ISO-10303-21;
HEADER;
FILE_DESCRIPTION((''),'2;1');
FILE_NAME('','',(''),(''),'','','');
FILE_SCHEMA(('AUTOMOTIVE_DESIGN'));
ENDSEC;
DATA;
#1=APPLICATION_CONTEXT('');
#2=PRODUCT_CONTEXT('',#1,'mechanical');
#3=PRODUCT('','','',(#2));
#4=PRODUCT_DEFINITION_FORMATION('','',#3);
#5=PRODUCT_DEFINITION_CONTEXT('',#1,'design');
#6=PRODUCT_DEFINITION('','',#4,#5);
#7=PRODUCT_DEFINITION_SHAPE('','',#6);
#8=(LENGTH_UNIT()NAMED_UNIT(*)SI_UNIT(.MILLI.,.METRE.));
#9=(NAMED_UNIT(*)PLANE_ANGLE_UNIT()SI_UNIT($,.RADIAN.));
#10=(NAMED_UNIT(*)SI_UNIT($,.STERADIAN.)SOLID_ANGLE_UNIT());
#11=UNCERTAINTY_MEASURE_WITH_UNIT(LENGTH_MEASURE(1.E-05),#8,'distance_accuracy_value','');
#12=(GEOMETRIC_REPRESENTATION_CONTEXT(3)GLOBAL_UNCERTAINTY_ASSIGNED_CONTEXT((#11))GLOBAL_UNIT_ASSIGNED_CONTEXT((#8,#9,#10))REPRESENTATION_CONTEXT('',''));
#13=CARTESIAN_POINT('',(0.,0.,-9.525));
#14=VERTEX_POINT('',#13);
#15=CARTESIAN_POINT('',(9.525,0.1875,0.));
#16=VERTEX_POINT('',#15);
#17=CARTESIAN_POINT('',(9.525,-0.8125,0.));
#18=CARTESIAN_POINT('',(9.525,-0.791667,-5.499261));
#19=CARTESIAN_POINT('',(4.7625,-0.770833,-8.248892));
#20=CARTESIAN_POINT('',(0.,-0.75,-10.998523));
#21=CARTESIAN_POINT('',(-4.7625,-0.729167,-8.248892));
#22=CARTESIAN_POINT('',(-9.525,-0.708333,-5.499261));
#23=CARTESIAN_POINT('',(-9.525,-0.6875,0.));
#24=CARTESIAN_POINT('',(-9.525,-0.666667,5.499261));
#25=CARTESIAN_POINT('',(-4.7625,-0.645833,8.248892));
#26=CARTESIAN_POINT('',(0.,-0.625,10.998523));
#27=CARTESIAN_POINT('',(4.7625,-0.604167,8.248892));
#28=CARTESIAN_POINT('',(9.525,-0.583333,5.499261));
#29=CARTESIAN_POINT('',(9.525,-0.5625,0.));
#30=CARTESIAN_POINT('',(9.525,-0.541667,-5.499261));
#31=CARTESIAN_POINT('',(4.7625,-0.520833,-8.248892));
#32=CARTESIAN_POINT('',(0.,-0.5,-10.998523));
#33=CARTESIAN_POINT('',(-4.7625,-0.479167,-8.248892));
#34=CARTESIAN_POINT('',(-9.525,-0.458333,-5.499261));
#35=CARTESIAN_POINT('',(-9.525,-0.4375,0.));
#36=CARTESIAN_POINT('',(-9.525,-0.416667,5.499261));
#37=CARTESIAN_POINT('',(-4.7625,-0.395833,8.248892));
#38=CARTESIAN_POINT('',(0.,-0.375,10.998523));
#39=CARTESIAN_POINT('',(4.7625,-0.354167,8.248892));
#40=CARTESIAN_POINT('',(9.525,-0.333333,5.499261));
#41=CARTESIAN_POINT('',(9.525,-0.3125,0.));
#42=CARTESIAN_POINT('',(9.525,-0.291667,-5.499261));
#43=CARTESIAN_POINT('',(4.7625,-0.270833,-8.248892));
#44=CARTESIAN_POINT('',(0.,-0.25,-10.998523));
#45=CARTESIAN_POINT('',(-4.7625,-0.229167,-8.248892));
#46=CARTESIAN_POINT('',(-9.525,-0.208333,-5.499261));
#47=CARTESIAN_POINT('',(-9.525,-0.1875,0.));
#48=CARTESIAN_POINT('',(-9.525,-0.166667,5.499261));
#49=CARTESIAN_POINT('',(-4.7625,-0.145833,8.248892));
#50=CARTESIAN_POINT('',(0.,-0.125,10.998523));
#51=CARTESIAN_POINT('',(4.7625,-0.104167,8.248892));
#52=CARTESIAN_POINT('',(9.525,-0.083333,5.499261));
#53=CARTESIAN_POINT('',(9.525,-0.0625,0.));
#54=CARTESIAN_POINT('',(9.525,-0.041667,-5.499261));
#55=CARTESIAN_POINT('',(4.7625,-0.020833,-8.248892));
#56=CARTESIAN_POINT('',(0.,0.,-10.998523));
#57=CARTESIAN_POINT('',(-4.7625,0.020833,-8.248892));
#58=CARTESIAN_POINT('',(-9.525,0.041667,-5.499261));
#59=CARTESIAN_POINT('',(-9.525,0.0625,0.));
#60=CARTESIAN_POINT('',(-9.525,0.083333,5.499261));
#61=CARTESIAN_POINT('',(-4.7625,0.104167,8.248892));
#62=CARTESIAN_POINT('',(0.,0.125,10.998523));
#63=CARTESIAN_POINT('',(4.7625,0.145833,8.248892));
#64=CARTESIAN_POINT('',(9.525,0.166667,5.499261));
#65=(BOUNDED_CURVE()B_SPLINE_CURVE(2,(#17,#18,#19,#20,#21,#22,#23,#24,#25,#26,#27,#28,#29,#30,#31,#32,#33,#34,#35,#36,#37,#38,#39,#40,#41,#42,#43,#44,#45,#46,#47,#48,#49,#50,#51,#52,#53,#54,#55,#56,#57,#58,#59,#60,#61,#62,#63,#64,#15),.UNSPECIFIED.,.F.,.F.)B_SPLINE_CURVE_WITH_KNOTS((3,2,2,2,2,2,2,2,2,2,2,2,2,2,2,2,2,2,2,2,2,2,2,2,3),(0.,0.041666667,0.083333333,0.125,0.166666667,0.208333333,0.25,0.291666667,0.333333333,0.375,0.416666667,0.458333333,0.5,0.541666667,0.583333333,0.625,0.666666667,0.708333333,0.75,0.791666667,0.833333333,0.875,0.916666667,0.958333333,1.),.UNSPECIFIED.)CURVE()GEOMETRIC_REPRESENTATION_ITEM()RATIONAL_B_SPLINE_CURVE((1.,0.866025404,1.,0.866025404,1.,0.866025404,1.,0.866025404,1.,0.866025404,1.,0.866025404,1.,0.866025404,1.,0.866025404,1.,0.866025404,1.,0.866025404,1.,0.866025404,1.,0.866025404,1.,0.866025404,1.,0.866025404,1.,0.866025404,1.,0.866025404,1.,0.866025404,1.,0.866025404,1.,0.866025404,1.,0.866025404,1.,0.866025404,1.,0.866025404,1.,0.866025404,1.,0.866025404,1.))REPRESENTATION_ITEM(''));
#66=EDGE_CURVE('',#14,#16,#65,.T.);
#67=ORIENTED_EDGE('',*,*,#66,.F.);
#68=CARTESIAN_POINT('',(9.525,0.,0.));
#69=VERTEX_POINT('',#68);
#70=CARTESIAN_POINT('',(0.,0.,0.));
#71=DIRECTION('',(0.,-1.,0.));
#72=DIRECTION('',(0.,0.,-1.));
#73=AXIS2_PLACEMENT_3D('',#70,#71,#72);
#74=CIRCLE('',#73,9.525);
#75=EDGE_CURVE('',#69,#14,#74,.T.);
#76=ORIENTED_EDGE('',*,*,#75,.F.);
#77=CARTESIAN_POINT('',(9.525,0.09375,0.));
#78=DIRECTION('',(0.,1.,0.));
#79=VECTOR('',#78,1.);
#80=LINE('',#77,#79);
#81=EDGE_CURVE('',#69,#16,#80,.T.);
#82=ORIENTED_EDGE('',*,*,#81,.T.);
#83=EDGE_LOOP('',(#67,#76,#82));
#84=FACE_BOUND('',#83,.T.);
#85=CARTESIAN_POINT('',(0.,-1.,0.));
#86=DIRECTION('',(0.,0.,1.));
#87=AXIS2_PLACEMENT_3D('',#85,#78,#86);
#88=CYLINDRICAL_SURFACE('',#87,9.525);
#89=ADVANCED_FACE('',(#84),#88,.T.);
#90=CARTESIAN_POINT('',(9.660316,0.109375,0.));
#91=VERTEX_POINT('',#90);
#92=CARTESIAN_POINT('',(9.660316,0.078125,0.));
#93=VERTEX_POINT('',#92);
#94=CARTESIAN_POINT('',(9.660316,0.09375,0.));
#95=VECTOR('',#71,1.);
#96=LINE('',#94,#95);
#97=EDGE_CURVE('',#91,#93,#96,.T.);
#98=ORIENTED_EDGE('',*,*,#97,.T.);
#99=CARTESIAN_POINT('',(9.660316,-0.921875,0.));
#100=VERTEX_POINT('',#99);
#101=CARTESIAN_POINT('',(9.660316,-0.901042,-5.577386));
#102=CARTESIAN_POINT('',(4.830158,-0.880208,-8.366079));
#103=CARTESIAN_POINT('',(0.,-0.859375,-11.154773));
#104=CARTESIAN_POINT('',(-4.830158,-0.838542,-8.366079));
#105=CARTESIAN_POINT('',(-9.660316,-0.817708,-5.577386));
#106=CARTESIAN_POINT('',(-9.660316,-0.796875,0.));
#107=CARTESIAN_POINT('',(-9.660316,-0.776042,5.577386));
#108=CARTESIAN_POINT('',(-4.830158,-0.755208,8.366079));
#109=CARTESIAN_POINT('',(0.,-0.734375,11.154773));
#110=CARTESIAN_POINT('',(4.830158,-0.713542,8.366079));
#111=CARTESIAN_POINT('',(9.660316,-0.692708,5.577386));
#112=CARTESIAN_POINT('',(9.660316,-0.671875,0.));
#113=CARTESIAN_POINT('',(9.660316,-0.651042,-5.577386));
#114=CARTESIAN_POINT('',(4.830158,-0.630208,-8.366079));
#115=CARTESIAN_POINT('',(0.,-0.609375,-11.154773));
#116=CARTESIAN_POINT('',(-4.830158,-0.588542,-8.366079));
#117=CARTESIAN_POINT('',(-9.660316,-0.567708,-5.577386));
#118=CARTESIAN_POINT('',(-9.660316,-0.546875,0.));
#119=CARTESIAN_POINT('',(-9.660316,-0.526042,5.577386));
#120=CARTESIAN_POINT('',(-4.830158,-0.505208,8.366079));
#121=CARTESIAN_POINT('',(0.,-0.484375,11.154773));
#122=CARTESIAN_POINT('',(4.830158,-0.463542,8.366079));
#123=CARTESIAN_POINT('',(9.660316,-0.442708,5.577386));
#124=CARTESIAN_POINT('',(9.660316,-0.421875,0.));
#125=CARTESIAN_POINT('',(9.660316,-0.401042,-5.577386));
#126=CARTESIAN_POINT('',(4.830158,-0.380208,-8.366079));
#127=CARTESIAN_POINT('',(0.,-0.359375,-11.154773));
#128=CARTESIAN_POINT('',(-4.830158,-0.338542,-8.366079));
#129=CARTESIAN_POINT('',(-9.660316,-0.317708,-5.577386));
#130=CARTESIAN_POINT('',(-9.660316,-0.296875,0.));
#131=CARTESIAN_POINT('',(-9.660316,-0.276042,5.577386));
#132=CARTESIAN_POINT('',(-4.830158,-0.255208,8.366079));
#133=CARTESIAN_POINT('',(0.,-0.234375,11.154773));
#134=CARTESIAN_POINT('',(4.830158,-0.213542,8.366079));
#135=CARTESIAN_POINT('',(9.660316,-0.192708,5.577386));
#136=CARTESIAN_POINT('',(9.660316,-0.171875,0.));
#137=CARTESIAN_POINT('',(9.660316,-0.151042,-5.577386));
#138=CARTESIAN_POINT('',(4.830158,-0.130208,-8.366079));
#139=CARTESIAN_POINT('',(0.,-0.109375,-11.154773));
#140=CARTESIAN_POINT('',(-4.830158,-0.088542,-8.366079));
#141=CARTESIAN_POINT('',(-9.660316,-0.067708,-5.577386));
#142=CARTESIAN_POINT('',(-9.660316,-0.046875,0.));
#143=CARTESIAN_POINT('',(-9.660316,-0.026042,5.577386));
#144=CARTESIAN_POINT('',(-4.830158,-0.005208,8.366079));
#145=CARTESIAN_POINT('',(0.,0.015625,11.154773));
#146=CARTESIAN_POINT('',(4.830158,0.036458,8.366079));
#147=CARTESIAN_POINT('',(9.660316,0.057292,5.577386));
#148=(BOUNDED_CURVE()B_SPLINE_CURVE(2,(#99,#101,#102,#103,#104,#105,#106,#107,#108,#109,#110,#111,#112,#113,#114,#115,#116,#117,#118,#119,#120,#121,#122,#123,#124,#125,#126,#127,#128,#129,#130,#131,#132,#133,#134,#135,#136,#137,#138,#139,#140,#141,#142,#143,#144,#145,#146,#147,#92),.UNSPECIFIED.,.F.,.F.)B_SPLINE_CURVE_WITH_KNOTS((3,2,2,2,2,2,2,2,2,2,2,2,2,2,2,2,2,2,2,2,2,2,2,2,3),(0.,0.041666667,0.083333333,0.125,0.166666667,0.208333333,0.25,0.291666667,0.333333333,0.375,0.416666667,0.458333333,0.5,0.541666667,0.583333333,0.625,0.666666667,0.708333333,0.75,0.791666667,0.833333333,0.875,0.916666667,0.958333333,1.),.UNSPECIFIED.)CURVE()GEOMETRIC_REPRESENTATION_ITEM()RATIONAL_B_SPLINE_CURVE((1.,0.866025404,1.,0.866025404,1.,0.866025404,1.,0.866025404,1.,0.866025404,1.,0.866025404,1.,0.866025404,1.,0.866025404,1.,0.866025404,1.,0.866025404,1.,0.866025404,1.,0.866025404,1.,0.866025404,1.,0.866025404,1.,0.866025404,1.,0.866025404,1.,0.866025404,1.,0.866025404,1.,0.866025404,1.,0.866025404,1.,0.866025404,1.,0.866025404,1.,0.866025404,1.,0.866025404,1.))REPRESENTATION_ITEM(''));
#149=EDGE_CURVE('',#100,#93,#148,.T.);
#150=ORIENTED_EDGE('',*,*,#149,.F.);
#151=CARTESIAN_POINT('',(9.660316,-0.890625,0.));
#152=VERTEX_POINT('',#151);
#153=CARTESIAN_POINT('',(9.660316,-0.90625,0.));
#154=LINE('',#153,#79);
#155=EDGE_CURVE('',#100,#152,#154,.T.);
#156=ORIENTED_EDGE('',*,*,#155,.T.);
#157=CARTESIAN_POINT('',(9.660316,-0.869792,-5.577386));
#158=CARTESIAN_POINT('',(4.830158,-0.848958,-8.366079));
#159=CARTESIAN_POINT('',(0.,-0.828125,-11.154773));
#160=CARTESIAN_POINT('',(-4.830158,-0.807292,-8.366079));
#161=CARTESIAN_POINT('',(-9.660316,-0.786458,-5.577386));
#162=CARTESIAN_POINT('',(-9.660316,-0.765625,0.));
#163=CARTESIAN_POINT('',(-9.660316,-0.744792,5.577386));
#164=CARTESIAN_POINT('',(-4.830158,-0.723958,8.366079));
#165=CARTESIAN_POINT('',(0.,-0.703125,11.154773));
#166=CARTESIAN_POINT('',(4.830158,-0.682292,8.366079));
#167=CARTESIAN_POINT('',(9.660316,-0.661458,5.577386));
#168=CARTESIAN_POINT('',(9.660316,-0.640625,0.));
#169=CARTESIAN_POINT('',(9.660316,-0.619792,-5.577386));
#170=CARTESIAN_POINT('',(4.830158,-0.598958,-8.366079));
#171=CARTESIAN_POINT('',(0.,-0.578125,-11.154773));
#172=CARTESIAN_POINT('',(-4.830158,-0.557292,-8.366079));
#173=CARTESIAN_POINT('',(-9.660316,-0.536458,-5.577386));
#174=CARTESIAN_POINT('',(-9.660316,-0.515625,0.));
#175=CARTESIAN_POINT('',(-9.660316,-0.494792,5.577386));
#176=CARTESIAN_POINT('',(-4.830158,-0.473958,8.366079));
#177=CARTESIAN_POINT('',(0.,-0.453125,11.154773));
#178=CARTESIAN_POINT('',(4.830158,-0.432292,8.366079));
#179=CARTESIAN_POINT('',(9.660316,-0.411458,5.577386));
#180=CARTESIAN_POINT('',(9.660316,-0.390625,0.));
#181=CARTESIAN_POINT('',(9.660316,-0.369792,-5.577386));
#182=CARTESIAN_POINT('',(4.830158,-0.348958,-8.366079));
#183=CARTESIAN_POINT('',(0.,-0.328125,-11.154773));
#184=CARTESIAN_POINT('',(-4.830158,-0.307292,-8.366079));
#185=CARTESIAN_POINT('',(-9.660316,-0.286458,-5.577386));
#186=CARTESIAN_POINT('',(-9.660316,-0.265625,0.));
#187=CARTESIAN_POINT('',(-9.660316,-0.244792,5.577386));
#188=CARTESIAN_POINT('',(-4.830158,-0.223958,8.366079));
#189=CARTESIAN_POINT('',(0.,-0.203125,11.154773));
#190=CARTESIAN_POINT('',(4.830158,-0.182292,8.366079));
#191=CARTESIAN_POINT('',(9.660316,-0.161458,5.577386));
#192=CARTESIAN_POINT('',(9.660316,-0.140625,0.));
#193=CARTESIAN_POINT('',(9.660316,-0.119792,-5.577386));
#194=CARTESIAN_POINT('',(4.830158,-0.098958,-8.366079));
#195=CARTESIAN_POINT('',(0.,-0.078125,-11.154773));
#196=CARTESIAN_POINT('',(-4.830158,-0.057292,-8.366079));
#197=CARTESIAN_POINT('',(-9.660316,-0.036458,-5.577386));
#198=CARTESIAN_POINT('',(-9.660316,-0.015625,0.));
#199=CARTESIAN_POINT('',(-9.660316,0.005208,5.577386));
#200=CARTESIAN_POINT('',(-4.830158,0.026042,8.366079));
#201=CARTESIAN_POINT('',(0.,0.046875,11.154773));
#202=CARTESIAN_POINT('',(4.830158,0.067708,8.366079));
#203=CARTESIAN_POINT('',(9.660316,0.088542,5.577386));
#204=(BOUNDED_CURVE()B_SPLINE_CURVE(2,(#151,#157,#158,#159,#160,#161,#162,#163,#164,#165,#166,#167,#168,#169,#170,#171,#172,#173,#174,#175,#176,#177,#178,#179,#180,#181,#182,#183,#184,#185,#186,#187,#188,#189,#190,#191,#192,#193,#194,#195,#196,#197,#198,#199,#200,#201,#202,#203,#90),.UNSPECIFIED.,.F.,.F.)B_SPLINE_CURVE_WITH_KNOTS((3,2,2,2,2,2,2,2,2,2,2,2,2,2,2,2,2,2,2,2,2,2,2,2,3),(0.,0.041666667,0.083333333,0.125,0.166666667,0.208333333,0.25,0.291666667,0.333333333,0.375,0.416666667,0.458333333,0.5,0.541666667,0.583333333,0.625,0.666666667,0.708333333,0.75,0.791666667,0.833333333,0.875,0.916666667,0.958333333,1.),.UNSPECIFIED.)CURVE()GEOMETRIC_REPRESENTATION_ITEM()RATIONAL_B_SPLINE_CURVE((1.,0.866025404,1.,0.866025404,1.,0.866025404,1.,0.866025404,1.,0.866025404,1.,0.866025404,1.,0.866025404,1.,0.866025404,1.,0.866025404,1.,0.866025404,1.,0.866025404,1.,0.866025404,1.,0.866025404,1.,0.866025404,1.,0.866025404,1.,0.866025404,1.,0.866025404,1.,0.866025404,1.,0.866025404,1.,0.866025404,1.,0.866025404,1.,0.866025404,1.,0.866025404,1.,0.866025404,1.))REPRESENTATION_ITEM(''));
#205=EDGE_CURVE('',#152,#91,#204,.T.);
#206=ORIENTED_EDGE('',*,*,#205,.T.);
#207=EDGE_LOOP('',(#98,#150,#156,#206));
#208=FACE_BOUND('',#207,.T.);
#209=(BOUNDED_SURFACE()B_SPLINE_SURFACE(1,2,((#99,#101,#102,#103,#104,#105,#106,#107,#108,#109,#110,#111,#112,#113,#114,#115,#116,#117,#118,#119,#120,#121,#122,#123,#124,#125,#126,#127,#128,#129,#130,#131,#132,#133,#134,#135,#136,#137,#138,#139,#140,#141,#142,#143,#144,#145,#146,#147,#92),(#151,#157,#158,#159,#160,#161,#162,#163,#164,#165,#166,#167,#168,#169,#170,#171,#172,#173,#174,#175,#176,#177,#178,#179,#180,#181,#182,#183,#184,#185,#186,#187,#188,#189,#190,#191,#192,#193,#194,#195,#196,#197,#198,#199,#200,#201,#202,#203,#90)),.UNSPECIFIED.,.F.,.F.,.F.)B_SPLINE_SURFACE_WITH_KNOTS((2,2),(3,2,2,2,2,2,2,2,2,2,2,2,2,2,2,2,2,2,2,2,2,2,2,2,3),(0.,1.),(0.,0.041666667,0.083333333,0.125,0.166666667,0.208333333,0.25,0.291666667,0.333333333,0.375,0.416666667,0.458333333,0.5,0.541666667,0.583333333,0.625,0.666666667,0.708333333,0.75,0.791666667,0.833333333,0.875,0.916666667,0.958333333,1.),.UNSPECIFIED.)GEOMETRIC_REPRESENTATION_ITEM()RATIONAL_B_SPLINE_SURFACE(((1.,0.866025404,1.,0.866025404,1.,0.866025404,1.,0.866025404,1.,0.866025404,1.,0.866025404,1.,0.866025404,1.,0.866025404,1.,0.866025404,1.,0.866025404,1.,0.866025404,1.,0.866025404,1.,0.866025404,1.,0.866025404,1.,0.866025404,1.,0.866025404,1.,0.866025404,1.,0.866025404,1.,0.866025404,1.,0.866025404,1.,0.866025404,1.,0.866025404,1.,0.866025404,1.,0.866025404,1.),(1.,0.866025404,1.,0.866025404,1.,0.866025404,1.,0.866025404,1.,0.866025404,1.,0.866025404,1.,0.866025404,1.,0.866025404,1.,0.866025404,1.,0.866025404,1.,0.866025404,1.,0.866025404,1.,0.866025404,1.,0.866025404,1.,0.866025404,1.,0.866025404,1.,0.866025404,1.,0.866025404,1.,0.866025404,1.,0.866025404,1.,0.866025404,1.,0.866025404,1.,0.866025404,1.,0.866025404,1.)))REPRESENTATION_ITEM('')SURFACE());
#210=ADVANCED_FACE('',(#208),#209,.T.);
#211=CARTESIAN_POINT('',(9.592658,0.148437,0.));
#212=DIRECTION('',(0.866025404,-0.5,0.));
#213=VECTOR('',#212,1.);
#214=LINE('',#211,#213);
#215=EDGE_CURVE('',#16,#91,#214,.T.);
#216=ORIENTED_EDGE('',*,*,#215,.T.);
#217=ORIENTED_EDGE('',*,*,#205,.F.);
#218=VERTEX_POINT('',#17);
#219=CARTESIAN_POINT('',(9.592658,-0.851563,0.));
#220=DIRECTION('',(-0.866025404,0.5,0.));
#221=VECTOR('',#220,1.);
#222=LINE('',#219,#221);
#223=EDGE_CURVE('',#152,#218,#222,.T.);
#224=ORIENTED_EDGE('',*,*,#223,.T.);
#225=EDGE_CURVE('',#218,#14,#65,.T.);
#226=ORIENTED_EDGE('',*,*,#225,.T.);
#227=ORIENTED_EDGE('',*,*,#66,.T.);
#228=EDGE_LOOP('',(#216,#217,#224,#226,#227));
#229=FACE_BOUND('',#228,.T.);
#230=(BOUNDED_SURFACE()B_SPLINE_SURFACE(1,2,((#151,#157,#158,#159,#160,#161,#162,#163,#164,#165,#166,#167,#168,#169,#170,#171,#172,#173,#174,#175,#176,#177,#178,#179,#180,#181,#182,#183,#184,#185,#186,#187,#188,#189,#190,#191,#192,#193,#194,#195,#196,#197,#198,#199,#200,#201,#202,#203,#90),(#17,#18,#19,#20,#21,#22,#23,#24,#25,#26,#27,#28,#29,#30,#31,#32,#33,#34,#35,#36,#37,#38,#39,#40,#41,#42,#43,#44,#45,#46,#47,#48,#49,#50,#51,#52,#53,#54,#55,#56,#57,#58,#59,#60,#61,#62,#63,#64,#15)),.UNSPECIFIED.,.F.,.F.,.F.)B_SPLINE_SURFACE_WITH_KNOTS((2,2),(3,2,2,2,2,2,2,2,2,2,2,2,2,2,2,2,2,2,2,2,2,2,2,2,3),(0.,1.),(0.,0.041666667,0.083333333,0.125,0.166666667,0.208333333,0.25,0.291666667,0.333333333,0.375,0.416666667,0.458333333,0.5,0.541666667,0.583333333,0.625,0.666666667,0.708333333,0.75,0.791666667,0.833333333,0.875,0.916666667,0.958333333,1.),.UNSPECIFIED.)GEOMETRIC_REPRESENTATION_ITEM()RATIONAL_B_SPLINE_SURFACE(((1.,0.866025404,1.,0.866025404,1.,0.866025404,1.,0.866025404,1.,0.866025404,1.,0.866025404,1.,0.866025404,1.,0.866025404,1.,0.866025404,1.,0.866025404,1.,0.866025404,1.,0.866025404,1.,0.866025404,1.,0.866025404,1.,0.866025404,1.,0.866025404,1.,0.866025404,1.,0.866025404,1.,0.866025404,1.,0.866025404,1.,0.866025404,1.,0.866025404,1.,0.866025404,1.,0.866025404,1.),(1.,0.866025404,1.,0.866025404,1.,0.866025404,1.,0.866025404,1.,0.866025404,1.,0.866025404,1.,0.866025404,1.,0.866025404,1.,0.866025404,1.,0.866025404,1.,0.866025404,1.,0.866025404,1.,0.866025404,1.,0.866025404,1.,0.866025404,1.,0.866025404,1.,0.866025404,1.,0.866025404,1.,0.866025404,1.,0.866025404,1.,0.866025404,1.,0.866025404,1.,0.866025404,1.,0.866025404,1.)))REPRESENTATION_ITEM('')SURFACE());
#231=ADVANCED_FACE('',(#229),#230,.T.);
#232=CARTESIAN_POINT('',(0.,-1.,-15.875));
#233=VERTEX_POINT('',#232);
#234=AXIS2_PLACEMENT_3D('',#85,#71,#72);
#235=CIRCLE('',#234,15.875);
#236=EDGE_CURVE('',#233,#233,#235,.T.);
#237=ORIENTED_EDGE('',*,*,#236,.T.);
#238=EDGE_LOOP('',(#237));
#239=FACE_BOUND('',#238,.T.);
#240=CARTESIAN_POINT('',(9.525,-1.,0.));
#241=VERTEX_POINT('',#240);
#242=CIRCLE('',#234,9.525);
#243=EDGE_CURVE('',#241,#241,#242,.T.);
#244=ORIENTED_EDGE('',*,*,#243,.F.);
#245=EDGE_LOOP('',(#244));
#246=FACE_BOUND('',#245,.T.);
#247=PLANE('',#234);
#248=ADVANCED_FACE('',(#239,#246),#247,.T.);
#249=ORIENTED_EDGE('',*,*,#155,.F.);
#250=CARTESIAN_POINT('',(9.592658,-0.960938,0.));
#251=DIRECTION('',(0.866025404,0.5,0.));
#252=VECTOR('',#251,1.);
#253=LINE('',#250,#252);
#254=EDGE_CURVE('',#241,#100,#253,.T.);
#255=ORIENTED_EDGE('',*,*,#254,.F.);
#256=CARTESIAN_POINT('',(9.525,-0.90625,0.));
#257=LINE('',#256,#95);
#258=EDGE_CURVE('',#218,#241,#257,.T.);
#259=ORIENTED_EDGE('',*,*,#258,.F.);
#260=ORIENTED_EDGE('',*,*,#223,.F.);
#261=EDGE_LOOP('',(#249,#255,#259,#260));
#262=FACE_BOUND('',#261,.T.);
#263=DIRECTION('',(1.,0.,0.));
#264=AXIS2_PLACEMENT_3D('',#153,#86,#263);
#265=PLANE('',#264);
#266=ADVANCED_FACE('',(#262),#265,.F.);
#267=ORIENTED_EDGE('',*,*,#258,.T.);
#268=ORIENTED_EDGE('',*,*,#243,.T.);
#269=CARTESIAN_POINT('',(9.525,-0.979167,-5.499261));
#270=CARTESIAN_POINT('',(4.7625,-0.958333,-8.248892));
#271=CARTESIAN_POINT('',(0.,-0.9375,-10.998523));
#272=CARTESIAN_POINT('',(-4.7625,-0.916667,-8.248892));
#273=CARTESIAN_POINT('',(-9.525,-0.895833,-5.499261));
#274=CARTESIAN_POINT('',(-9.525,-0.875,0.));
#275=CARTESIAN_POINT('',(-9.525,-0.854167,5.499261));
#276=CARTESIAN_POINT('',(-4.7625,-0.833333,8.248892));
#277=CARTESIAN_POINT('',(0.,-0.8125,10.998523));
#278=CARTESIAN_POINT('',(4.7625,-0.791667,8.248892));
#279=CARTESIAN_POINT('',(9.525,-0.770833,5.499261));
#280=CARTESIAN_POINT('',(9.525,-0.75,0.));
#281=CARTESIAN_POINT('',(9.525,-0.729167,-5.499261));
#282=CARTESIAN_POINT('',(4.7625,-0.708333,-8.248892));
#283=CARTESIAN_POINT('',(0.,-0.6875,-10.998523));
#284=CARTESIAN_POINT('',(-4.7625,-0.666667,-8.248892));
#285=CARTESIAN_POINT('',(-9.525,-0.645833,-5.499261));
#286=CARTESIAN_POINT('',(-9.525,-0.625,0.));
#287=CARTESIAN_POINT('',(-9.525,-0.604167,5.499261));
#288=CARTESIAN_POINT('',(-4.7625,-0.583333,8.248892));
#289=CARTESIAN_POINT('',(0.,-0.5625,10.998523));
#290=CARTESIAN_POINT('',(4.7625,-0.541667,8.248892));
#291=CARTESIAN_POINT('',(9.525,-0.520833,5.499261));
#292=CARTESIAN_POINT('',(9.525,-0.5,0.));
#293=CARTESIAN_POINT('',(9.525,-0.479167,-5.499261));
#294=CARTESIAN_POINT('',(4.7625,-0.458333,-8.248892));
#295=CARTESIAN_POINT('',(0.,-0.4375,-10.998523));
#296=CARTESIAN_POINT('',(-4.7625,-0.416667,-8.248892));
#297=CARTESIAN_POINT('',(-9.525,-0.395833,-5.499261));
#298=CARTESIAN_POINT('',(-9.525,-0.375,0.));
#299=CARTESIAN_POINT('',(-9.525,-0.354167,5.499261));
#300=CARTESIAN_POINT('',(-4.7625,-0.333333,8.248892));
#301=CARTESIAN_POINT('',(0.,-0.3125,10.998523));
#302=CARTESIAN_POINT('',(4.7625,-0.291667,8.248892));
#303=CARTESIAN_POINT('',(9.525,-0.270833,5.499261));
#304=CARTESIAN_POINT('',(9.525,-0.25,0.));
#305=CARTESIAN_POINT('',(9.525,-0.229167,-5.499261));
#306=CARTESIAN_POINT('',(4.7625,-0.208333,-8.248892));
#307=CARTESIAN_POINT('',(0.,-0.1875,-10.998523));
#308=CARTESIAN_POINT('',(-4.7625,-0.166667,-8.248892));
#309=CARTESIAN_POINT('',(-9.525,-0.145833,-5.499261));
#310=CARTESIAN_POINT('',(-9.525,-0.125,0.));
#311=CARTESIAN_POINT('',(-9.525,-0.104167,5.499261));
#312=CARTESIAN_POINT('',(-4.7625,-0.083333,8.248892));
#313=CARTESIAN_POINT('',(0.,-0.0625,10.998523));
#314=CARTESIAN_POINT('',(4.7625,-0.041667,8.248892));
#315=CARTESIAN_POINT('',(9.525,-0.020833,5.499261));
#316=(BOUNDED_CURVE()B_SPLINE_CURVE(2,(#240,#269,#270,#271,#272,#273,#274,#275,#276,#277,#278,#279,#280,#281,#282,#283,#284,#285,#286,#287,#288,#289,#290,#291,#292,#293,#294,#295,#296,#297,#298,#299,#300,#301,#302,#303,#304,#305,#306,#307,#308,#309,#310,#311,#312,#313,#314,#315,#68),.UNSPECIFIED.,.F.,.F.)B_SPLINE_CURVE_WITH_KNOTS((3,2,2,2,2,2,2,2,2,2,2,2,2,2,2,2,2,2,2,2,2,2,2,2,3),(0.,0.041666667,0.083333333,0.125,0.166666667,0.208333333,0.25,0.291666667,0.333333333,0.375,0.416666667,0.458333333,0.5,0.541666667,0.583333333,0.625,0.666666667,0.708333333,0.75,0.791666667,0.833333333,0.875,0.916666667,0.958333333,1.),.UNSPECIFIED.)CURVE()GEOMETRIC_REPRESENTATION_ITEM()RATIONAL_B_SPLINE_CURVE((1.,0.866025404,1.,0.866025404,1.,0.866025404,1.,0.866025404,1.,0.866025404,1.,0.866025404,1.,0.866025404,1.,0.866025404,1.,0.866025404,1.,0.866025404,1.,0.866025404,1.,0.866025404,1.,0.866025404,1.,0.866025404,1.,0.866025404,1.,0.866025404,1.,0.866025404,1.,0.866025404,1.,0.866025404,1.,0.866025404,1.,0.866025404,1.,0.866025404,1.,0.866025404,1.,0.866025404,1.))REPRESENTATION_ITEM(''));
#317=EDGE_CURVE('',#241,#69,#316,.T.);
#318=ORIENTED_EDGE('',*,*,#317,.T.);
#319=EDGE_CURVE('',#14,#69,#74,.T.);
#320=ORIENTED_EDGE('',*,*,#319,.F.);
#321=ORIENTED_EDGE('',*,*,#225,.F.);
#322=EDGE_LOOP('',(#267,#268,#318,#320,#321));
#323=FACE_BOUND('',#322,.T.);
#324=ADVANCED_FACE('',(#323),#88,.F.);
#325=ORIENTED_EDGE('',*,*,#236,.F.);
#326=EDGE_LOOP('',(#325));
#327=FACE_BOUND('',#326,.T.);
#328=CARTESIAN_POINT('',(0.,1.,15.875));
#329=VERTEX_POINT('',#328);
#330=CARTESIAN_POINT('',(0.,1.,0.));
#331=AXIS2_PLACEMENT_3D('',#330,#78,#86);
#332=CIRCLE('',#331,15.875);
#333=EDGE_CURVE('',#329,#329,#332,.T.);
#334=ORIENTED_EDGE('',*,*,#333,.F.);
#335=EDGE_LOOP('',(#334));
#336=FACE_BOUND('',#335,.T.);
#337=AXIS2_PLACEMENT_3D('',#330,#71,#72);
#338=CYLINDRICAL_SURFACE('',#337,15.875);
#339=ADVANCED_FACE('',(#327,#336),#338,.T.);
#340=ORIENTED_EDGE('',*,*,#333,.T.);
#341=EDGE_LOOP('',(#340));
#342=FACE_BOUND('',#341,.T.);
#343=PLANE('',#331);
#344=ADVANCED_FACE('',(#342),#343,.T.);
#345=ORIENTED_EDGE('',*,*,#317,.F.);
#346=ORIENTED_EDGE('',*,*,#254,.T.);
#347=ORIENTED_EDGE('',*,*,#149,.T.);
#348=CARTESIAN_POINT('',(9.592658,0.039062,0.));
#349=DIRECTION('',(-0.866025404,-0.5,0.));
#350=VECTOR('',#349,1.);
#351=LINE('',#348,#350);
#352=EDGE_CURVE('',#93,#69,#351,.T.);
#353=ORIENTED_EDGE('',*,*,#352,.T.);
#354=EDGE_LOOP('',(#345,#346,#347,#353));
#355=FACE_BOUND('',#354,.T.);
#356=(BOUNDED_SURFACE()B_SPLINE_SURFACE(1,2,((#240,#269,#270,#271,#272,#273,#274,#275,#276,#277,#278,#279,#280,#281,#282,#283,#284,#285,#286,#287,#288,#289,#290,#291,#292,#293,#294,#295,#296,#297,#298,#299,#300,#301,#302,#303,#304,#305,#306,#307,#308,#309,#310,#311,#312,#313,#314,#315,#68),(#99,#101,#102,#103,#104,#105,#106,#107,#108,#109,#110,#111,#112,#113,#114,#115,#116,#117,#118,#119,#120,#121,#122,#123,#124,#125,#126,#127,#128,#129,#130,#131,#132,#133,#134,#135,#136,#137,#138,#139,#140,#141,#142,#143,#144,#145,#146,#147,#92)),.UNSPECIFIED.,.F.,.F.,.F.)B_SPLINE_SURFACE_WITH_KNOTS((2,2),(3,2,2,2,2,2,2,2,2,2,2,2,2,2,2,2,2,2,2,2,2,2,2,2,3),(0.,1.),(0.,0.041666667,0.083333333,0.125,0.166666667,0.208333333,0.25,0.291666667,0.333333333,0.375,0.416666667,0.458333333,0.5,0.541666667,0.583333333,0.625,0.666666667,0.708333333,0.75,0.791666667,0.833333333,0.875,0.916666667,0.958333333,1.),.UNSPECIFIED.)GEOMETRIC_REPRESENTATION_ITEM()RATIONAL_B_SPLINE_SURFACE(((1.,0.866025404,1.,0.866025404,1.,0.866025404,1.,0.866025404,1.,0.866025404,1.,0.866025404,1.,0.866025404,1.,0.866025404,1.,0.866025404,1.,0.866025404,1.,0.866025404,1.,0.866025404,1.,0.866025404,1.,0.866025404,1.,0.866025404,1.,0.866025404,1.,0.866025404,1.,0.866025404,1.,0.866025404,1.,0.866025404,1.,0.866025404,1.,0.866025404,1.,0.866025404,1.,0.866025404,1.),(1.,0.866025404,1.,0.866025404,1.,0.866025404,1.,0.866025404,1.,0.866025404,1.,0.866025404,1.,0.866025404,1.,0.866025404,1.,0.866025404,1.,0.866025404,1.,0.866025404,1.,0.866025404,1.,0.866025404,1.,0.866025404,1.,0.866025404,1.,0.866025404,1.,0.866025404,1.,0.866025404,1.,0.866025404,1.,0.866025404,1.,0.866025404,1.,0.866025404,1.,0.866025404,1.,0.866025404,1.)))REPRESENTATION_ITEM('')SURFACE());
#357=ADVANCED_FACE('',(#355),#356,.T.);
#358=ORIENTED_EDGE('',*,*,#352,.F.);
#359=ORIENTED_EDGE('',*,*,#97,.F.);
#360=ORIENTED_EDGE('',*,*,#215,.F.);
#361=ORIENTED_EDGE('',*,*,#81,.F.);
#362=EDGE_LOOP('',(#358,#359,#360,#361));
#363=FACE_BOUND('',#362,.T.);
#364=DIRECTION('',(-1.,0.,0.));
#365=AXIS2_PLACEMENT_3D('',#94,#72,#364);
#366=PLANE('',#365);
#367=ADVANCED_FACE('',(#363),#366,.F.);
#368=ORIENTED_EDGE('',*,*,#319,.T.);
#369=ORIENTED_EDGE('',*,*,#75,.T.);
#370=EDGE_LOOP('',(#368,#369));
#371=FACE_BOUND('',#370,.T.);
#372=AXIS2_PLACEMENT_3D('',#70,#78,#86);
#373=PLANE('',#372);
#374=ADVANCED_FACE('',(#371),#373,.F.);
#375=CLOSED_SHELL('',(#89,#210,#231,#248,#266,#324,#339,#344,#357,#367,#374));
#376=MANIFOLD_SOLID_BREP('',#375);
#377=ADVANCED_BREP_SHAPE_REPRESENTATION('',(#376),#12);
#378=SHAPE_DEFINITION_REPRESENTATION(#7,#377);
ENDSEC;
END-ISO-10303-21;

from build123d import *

# Parameters (mm, degrees)
SKETCH1_R           = 15.875
BOSS_EXTRUDE1_DEPTH = 1
BOSS_EXTRUDE3_START = 1
SKETCH6_R           = 15.875
SKETCH6_R_2         = 9.525
BOSS_EXTRUDE3_DEPTH = 1
THREAD1_PITCH       = 0.25


with BuildPart() as part:
    # Sketch1 → Boss-Extrude1 (new body)
    with BuildSketch(Plane(origin=(0, 0, 0), x_dir=(1, 0, 0), z_dir=(0, 1, 0))):
        with Locations(Location((0, 0, 0), (0, 0, 270))):
            Circle(SKETCH1_R)
    extrude(amount=BOSS_EXTRUDE1_DEPTH)

    # Sketch6 → Boss-Extrude3 (add)
    with BuildSketch(Plane.XZ.offset(BOSS_EXTRUDE3_START)):
        with Locations(Location((0, 0, 0), (0, 0, 270))):
            Circle(SKETCH6_R)
        with Locations(Location((0, 0, 0), (0, 0, 270))):
            Circle(SKETCH6_R_2, mode=Mode.SUBTRACT)
    extrude(amount=-BOSS_EXTRUDE3_DEPTH)

    # Thread1: the profile of Thread Profile1 profile screwed along a right-hand helix of 4 turns, 6 arcs to a turn; built about Z, then put on its axis
    thread1_z = Axis((0, 0, 0), (0, 0, 1))
    thread1_corners = [(9.5247, 0, -0.000173205), (9.660316469, 0, 0.078125), (9.660316469, 0, 0.109375), (9.5247, 0, 0.187673204)]
    with BuildLine(mode=Mode.PRIVATE) as thread1_profile:
        Line(thread1_corners[0], thread1_corners[1])
        Line(thread1_corners[1], thread1_corners[2])
        Line(thread1_corners[2], thread1_corners[3])
        Line(thread1_corners[3], thread1_corners[0])
    thread1_cap = Face(thread1_profile.wire())
    thread1_turn_angles = [0, 30, 60, 90, 120, 150, 180, 210, 240, 270, 300, 330, 360]
    thread1_turn_weights = [1, 0.8660254037844387, 1, 0.8660254037844387, 1, 0.8660254037844387, 1, 0.8660254037844387, 1, 0.8660254037844387, 1, 0.8660254037844387, 1]
    thread1_turn_rails = [Edge.make_bspline([Vector(p[0], p[1], 0).rotate(thread1_z, thread1_turn_angles[k]) / thread1_turn_weights[k] + Vector(0, 0, p[2] + THREAD1_PITCH * thread1_turn_angles[k] / 360) for k in range(13)], [0, 0, 0, 1, 1, 2, 2, 3, 3, 4, 4, 5, 5, 6, 6, 6], 2, thread1_turn_weights) for p in thread1_corners]
    thread1_turn_sides = [Face.make_surface_from_curves(thread1_turn_rails[p[0]], thread1_turn_rails[p[1]]) for p in [(0, 1), (1, 2), (2, 3), (3, 0)]]
    thread1 = Plane(origin=(0, -1, 0), x_dir=(1, 0, 0), z_dir=(0, 1, 0)) * Solid(Shell([*[p.moved(Location((0, 0, THREAD1_PITCH * i))) for i in range(4) for p in thread1_turn_sides], thread1_cap, thread1_cap.rotate(thread1_z, 1440).moved(Location((0, 0, THREAD1_PITCH * 1440 / 360)))]))
    add(thread1, mode=Mode.SUBTRACT)


solid = part.part
